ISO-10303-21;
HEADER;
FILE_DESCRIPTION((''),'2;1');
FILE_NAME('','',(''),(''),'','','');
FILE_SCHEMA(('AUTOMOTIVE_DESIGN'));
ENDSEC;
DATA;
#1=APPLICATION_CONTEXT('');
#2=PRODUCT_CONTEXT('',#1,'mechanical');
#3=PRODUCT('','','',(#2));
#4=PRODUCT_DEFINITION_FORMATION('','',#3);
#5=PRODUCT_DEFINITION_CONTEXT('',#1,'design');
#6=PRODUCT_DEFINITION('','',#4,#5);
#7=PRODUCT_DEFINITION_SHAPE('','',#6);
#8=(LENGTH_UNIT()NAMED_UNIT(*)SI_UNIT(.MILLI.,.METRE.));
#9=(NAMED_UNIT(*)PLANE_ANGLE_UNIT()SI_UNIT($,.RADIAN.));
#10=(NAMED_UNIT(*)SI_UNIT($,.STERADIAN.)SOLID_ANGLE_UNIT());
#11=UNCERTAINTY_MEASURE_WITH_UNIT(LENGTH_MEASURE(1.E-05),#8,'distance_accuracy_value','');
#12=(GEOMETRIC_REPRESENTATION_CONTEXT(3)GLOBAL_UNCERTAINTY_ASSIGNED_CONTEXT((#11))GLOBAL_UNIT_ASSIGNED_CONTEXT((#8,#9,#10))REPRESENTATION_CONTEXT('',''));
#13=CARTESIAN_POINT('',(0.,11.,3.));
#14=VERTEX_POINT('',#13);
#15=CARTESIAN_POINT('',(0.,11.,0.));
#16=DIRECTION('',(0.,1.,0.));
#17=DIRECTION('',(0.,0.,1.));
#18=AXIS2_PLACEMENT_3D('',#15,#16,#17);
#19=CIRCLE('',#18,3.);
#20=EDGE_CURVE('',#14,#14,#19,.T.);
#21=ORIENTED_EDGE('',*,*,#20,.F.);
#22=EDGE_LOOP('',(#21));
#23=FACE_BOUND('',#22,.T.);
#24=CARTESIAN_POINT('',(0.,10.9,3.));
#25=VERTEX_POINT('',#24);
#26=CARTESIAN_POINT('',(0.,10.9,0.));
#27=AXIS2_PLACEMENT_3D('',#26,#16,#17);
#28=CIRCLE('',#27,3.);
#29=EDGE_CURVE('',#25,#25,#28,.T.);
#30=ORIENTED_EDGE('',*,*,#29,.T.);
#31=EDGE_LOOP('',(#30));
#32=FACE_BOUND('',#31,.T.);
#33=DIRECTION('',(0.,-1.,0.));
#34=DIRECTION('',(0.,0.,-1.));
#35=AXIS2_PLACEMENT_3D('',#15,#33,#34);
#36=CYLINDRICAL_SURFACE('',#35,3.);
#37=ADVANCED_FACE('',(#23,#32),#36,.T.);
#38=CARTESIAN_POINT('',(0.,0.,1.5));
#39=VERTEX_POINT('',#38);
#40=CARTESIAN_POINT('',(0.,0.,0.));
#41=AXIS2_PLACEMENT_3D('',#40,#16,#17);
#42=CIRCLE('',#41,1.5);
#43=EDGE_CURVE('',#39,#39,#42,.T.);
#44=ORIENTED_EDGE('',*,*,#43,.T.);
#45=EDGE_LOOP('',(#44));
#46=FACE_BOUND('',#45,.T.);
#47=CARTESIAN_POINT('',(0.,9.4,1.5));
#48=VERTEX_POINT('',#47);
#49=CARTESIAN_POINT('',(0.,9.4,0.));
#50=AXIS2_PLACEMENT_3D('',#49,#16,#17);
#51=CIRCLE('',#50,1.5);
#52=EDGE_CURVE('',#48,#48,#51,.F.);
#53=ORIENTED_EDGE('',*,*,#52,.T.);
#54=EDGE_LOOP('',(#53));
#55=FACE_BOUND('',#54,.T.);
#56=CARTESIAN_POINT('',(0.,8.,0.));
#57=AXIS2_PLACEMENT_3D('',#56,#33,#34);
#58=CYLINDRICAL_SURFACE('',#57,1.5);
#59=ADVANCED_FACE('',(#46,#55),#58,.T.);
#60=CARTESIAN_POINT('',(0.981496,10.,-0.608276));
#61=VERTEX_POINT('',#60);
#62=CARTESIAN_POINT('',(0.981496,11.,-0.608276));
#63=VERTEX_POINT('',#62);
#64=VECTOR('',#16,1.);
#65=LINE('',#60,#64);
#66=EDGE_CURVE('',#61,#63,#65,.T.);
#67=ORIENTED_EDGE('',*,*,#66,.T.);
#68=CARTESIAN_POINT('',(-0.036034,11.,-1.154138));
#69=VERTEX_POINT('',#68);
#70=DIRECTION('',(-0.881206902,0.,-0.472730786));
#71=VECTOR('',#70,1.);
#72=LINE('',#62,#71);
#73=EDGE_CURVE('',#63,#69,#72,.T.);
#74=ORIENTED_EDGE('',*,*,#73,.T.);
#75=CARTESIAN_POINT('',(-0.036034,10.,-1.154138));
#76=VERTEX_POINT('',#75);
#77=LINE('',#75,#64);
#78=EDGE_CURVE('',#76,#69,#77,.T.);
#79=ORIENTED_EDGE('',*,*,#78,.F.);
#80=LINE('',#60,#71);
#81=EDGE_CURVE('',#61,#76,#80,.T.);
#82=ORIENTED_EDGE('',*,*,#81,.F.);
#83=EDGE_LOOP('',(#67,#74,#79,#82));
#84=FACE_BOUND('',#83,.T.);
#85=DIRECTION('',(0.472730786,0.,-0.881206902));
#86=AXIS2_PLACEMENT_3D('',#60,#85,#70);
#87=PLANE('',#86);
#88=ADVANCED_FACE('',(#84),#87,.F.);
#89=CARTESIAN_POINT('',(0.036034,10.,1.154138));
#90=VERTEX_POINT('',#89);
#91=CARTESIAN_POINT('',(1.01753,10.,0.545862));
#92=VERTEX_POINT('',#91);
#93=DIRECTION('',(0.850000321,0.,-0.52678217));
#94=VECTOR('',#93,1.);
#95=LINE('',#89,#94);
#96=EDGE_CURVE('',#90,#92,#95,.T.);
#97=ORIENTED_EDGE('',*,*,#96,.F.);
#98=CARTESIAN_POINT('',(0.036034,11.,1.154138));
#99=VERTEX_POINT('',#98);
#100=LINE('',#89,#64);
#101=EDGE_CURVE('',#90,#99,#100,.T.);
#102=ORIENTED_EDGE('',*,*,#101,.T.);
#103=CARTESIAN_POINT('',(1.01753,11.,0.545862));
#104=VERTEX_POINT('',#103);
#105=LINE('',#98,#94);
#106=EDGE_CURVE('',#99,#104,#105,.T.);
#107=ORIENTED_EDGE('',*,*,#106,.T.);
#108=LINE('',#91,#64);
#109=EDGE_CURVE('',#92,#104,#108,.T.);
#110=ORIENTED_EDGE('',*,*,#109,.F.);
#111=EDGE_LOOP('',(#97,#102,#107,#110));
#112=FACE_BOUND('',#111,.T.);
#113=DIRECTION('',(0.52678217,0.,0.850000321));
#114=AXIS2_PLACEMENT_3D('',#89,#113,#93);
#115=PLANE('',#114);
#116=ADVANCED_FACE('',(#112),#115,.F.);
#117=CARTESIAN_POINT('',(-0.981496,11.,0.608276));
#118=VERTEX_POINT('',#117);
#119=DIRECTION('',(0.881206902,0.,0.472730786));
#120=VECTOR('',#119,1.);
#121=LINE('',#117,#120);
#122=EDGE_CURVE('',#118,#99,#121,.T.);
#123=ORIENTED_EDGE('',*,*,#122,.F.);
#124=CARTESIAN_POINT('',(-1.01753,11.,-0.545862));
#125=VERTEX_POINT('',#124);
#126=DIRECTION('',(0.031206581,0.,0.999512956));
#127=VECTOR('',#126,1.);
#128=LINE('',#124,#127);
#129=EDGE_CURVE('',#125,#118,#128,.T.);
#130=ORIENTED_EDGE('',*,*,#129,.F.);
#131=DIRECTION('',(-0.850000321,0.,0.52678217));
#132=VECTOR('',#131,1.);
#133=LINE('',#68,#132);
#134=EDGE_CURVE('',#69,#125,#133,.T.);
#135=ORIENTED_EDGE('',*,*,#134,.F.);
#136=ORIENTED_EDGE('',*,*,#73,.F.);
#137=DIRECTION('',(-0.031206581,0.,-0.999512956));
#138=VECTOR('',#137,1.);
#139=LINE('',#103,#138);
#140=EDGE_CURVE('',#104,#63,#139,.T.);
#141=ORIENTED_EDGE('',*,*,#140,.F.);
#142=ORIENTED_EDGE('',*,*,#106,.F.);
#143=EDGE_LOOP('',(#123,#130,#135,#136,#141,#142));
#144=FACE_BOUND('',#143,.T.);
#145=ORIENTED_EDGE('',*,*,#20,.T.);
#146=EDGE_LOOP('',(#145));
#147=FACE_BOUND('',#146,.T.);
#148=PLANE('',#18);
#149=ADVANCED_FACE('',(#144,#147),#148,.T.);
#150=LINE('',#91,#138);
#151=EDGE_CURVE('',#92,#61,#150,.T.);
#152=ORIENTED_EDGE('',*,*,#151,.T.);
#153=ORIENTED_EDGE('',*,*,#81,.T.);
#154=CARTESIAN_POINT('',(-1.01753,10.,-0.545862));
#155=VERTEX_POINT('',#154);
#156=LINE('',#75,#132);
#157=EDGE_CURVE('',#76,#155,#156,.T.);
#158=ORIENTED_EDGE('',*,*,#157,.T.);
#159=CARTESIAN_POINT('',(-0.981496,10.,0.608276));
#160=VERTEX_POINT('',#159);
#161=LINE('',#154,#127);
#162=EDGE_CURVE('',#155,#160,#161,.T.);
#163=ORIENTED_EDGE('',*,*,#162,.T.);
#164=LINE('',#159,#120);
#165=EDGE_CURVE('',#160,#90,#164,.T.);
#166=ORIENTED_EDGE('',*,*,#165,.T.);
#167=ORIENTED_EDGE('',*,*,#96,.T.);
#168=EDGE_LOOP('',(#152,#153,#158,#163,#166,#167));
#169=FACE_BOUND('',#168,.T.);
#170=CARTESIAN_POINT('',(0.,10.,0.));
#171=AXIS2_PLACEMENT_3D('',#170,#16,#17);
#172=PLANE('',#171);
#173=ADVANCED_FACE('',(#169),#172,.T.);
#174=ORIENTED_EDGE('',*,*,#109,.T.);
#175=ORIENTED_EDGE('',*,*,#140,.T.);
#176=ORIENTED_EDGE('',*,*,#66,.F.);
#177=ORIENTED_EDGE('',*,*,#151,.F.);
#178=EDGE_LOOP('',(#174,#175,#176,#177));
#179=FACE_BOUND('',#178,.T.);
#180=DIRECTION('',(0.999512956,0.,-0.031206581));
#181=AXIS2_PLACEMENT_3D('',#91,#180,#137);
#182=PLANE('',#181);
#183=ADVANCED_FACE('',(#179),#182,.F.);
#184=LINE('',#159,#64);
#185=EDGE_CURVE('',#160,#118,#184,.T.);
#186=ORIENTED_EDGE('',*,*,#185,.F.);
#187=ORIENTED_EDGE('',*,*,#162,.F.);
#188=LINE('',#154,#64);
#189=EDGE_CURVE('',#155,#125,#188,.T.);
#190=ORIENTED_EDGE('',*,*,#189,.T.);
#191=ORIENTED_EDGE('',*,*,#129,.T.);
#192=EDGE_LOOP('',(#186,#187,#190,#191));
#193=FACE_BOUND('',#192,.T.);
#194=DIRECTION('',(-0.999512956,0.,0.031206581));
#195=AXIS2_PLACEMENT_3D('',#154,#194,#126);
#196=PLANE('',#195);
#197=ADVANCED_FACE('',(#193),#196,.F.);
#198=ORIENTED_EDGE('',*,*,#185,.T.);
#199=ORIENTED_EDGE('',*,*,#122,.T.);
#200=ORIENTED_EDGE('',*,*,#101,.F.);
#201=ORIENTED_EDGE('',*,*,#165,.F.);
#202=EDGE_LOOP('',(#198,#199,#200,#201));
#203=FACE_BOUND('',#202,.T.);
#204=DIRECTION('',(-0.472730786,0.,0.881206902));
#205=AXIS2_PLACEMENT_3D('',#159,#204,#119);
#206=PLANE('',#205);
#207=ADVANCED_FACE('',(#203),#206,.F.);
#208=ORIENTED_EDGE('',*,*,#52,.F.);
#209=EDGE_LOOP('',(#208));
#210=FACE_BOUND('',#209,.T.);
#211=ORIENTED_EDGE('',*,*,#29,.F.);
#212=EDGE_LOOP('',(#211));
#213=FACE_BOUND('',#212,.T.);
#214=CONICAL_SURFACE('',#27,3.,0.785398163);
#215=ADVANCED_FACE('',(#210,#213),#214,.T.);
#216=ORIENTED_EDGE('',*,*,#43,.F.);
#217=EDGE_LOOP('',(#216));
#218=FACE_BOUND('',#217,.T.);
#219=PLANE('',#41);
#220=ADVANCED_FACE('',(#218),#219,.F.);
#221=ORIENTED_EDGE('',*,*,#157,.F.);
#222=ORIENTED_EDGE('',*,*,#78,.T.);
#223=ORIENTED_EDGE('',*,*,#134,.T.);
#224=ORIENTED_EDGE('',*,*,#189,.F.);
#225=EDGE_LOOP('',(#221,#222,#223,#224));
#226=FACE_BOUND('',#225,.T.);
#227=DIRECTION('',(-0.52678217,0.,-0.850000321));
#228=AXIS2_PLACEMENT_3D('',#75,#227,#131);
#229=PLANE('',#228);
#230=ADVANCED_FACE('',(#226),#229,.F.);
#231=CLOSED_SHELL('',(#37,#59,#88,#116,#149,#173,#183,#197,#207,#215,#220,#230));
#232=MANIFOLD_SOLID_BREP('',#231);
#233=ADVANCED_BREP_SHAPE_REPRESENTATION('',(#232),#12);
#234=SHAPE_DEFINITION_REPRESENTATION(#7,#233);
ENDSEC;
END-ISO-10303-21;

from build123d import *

# Parameters (mm, degrees)
SKETCH_1_R          = 1.5
EXTRUDE_1_DEPTH     = 8
SKETCH_2_R          = 3
EXTRUDE_2_DEPTH     = 3
CHAMFER_1_SIZE      = 2.9
CUT_EXTRUDE_1_DEPTH = 1


with BuildPart() as part:
    # 草图1 → 凸台-拉伸1 (new body)
    with BuildSketch(Plane(origin=(0, 0, 0), x_dir=(1, 0, 0), z_dir=(0, 1, 0))):
        with Locations(Location((0, 0, 0), (0, 0, 270))):
            Circle(SKETCH_1_R)
    extrude(amount=EXTRUDE_1_DEPTH)

    # 草图2 → 凸台-拉伸2 (add)
    with BuildSketch(Plane(origin=(0, 8, 0), x_dir=(1, 0, 0), z_dir=(0, 1, 0))):
        with Locations(Location((0, 0, 0), (0, 0, 270))):
            Circle(SKETCH_2_R)
    extrude(amount=EXTRUDE_2_DEPTH)

    # 倒角1
    # the kernel refuses this chamfer: 2.9 mm, written as the material it takes off along each edge
    with BuildSketch(Plane(origin=(0, 8, 0), x_dir=(0, 0, 1), z_dir=(-1, 0, 0))) as chamfer_1_piece_1_section:
        Polygon((3, CHAMFER_1_SIZE), (3 - CHAMFER_1_SIZE, 0), (3, 0), align=None)
    chamfer_1_piece_1 = revolve(axis=Axis((0, 8, 0), (0, 1, 0)), mode=Mode.PRIVATE)
    chamfer_1_piece_1 = chamfer_1_piece_1 - Plane(origin=(0, 10.16453564, 0), x_dir=(0, 0, 1), z_dir=(0, -1, 0)) * Cylinder(1.5, 12, mode=Mode.PRIVATE)
    add(chamfer_1_piece_1, mode=Mode.SUBTRACT)

    # 草图3 → 切除-拉伸1 (cut)
    with BuildSketch(Plane(origin=(0, 11, 0), x_dir=(1, 0, 0), z_dir=(0, 1, 0))):
        Polygon((1.017530084, -0.545862493), (0.981495828, 0.608275655), (-0.036034256, 1.154138148), (-1.017530084, 0.545862493), (-0.981495828, -0.608275655), (0.036034256, -1.154138148), align=None)
    extrude(amount=-CUT_EXTRUDE_1_DEPTH, mode=Mode.SUBTRACT)


solid = part.part
